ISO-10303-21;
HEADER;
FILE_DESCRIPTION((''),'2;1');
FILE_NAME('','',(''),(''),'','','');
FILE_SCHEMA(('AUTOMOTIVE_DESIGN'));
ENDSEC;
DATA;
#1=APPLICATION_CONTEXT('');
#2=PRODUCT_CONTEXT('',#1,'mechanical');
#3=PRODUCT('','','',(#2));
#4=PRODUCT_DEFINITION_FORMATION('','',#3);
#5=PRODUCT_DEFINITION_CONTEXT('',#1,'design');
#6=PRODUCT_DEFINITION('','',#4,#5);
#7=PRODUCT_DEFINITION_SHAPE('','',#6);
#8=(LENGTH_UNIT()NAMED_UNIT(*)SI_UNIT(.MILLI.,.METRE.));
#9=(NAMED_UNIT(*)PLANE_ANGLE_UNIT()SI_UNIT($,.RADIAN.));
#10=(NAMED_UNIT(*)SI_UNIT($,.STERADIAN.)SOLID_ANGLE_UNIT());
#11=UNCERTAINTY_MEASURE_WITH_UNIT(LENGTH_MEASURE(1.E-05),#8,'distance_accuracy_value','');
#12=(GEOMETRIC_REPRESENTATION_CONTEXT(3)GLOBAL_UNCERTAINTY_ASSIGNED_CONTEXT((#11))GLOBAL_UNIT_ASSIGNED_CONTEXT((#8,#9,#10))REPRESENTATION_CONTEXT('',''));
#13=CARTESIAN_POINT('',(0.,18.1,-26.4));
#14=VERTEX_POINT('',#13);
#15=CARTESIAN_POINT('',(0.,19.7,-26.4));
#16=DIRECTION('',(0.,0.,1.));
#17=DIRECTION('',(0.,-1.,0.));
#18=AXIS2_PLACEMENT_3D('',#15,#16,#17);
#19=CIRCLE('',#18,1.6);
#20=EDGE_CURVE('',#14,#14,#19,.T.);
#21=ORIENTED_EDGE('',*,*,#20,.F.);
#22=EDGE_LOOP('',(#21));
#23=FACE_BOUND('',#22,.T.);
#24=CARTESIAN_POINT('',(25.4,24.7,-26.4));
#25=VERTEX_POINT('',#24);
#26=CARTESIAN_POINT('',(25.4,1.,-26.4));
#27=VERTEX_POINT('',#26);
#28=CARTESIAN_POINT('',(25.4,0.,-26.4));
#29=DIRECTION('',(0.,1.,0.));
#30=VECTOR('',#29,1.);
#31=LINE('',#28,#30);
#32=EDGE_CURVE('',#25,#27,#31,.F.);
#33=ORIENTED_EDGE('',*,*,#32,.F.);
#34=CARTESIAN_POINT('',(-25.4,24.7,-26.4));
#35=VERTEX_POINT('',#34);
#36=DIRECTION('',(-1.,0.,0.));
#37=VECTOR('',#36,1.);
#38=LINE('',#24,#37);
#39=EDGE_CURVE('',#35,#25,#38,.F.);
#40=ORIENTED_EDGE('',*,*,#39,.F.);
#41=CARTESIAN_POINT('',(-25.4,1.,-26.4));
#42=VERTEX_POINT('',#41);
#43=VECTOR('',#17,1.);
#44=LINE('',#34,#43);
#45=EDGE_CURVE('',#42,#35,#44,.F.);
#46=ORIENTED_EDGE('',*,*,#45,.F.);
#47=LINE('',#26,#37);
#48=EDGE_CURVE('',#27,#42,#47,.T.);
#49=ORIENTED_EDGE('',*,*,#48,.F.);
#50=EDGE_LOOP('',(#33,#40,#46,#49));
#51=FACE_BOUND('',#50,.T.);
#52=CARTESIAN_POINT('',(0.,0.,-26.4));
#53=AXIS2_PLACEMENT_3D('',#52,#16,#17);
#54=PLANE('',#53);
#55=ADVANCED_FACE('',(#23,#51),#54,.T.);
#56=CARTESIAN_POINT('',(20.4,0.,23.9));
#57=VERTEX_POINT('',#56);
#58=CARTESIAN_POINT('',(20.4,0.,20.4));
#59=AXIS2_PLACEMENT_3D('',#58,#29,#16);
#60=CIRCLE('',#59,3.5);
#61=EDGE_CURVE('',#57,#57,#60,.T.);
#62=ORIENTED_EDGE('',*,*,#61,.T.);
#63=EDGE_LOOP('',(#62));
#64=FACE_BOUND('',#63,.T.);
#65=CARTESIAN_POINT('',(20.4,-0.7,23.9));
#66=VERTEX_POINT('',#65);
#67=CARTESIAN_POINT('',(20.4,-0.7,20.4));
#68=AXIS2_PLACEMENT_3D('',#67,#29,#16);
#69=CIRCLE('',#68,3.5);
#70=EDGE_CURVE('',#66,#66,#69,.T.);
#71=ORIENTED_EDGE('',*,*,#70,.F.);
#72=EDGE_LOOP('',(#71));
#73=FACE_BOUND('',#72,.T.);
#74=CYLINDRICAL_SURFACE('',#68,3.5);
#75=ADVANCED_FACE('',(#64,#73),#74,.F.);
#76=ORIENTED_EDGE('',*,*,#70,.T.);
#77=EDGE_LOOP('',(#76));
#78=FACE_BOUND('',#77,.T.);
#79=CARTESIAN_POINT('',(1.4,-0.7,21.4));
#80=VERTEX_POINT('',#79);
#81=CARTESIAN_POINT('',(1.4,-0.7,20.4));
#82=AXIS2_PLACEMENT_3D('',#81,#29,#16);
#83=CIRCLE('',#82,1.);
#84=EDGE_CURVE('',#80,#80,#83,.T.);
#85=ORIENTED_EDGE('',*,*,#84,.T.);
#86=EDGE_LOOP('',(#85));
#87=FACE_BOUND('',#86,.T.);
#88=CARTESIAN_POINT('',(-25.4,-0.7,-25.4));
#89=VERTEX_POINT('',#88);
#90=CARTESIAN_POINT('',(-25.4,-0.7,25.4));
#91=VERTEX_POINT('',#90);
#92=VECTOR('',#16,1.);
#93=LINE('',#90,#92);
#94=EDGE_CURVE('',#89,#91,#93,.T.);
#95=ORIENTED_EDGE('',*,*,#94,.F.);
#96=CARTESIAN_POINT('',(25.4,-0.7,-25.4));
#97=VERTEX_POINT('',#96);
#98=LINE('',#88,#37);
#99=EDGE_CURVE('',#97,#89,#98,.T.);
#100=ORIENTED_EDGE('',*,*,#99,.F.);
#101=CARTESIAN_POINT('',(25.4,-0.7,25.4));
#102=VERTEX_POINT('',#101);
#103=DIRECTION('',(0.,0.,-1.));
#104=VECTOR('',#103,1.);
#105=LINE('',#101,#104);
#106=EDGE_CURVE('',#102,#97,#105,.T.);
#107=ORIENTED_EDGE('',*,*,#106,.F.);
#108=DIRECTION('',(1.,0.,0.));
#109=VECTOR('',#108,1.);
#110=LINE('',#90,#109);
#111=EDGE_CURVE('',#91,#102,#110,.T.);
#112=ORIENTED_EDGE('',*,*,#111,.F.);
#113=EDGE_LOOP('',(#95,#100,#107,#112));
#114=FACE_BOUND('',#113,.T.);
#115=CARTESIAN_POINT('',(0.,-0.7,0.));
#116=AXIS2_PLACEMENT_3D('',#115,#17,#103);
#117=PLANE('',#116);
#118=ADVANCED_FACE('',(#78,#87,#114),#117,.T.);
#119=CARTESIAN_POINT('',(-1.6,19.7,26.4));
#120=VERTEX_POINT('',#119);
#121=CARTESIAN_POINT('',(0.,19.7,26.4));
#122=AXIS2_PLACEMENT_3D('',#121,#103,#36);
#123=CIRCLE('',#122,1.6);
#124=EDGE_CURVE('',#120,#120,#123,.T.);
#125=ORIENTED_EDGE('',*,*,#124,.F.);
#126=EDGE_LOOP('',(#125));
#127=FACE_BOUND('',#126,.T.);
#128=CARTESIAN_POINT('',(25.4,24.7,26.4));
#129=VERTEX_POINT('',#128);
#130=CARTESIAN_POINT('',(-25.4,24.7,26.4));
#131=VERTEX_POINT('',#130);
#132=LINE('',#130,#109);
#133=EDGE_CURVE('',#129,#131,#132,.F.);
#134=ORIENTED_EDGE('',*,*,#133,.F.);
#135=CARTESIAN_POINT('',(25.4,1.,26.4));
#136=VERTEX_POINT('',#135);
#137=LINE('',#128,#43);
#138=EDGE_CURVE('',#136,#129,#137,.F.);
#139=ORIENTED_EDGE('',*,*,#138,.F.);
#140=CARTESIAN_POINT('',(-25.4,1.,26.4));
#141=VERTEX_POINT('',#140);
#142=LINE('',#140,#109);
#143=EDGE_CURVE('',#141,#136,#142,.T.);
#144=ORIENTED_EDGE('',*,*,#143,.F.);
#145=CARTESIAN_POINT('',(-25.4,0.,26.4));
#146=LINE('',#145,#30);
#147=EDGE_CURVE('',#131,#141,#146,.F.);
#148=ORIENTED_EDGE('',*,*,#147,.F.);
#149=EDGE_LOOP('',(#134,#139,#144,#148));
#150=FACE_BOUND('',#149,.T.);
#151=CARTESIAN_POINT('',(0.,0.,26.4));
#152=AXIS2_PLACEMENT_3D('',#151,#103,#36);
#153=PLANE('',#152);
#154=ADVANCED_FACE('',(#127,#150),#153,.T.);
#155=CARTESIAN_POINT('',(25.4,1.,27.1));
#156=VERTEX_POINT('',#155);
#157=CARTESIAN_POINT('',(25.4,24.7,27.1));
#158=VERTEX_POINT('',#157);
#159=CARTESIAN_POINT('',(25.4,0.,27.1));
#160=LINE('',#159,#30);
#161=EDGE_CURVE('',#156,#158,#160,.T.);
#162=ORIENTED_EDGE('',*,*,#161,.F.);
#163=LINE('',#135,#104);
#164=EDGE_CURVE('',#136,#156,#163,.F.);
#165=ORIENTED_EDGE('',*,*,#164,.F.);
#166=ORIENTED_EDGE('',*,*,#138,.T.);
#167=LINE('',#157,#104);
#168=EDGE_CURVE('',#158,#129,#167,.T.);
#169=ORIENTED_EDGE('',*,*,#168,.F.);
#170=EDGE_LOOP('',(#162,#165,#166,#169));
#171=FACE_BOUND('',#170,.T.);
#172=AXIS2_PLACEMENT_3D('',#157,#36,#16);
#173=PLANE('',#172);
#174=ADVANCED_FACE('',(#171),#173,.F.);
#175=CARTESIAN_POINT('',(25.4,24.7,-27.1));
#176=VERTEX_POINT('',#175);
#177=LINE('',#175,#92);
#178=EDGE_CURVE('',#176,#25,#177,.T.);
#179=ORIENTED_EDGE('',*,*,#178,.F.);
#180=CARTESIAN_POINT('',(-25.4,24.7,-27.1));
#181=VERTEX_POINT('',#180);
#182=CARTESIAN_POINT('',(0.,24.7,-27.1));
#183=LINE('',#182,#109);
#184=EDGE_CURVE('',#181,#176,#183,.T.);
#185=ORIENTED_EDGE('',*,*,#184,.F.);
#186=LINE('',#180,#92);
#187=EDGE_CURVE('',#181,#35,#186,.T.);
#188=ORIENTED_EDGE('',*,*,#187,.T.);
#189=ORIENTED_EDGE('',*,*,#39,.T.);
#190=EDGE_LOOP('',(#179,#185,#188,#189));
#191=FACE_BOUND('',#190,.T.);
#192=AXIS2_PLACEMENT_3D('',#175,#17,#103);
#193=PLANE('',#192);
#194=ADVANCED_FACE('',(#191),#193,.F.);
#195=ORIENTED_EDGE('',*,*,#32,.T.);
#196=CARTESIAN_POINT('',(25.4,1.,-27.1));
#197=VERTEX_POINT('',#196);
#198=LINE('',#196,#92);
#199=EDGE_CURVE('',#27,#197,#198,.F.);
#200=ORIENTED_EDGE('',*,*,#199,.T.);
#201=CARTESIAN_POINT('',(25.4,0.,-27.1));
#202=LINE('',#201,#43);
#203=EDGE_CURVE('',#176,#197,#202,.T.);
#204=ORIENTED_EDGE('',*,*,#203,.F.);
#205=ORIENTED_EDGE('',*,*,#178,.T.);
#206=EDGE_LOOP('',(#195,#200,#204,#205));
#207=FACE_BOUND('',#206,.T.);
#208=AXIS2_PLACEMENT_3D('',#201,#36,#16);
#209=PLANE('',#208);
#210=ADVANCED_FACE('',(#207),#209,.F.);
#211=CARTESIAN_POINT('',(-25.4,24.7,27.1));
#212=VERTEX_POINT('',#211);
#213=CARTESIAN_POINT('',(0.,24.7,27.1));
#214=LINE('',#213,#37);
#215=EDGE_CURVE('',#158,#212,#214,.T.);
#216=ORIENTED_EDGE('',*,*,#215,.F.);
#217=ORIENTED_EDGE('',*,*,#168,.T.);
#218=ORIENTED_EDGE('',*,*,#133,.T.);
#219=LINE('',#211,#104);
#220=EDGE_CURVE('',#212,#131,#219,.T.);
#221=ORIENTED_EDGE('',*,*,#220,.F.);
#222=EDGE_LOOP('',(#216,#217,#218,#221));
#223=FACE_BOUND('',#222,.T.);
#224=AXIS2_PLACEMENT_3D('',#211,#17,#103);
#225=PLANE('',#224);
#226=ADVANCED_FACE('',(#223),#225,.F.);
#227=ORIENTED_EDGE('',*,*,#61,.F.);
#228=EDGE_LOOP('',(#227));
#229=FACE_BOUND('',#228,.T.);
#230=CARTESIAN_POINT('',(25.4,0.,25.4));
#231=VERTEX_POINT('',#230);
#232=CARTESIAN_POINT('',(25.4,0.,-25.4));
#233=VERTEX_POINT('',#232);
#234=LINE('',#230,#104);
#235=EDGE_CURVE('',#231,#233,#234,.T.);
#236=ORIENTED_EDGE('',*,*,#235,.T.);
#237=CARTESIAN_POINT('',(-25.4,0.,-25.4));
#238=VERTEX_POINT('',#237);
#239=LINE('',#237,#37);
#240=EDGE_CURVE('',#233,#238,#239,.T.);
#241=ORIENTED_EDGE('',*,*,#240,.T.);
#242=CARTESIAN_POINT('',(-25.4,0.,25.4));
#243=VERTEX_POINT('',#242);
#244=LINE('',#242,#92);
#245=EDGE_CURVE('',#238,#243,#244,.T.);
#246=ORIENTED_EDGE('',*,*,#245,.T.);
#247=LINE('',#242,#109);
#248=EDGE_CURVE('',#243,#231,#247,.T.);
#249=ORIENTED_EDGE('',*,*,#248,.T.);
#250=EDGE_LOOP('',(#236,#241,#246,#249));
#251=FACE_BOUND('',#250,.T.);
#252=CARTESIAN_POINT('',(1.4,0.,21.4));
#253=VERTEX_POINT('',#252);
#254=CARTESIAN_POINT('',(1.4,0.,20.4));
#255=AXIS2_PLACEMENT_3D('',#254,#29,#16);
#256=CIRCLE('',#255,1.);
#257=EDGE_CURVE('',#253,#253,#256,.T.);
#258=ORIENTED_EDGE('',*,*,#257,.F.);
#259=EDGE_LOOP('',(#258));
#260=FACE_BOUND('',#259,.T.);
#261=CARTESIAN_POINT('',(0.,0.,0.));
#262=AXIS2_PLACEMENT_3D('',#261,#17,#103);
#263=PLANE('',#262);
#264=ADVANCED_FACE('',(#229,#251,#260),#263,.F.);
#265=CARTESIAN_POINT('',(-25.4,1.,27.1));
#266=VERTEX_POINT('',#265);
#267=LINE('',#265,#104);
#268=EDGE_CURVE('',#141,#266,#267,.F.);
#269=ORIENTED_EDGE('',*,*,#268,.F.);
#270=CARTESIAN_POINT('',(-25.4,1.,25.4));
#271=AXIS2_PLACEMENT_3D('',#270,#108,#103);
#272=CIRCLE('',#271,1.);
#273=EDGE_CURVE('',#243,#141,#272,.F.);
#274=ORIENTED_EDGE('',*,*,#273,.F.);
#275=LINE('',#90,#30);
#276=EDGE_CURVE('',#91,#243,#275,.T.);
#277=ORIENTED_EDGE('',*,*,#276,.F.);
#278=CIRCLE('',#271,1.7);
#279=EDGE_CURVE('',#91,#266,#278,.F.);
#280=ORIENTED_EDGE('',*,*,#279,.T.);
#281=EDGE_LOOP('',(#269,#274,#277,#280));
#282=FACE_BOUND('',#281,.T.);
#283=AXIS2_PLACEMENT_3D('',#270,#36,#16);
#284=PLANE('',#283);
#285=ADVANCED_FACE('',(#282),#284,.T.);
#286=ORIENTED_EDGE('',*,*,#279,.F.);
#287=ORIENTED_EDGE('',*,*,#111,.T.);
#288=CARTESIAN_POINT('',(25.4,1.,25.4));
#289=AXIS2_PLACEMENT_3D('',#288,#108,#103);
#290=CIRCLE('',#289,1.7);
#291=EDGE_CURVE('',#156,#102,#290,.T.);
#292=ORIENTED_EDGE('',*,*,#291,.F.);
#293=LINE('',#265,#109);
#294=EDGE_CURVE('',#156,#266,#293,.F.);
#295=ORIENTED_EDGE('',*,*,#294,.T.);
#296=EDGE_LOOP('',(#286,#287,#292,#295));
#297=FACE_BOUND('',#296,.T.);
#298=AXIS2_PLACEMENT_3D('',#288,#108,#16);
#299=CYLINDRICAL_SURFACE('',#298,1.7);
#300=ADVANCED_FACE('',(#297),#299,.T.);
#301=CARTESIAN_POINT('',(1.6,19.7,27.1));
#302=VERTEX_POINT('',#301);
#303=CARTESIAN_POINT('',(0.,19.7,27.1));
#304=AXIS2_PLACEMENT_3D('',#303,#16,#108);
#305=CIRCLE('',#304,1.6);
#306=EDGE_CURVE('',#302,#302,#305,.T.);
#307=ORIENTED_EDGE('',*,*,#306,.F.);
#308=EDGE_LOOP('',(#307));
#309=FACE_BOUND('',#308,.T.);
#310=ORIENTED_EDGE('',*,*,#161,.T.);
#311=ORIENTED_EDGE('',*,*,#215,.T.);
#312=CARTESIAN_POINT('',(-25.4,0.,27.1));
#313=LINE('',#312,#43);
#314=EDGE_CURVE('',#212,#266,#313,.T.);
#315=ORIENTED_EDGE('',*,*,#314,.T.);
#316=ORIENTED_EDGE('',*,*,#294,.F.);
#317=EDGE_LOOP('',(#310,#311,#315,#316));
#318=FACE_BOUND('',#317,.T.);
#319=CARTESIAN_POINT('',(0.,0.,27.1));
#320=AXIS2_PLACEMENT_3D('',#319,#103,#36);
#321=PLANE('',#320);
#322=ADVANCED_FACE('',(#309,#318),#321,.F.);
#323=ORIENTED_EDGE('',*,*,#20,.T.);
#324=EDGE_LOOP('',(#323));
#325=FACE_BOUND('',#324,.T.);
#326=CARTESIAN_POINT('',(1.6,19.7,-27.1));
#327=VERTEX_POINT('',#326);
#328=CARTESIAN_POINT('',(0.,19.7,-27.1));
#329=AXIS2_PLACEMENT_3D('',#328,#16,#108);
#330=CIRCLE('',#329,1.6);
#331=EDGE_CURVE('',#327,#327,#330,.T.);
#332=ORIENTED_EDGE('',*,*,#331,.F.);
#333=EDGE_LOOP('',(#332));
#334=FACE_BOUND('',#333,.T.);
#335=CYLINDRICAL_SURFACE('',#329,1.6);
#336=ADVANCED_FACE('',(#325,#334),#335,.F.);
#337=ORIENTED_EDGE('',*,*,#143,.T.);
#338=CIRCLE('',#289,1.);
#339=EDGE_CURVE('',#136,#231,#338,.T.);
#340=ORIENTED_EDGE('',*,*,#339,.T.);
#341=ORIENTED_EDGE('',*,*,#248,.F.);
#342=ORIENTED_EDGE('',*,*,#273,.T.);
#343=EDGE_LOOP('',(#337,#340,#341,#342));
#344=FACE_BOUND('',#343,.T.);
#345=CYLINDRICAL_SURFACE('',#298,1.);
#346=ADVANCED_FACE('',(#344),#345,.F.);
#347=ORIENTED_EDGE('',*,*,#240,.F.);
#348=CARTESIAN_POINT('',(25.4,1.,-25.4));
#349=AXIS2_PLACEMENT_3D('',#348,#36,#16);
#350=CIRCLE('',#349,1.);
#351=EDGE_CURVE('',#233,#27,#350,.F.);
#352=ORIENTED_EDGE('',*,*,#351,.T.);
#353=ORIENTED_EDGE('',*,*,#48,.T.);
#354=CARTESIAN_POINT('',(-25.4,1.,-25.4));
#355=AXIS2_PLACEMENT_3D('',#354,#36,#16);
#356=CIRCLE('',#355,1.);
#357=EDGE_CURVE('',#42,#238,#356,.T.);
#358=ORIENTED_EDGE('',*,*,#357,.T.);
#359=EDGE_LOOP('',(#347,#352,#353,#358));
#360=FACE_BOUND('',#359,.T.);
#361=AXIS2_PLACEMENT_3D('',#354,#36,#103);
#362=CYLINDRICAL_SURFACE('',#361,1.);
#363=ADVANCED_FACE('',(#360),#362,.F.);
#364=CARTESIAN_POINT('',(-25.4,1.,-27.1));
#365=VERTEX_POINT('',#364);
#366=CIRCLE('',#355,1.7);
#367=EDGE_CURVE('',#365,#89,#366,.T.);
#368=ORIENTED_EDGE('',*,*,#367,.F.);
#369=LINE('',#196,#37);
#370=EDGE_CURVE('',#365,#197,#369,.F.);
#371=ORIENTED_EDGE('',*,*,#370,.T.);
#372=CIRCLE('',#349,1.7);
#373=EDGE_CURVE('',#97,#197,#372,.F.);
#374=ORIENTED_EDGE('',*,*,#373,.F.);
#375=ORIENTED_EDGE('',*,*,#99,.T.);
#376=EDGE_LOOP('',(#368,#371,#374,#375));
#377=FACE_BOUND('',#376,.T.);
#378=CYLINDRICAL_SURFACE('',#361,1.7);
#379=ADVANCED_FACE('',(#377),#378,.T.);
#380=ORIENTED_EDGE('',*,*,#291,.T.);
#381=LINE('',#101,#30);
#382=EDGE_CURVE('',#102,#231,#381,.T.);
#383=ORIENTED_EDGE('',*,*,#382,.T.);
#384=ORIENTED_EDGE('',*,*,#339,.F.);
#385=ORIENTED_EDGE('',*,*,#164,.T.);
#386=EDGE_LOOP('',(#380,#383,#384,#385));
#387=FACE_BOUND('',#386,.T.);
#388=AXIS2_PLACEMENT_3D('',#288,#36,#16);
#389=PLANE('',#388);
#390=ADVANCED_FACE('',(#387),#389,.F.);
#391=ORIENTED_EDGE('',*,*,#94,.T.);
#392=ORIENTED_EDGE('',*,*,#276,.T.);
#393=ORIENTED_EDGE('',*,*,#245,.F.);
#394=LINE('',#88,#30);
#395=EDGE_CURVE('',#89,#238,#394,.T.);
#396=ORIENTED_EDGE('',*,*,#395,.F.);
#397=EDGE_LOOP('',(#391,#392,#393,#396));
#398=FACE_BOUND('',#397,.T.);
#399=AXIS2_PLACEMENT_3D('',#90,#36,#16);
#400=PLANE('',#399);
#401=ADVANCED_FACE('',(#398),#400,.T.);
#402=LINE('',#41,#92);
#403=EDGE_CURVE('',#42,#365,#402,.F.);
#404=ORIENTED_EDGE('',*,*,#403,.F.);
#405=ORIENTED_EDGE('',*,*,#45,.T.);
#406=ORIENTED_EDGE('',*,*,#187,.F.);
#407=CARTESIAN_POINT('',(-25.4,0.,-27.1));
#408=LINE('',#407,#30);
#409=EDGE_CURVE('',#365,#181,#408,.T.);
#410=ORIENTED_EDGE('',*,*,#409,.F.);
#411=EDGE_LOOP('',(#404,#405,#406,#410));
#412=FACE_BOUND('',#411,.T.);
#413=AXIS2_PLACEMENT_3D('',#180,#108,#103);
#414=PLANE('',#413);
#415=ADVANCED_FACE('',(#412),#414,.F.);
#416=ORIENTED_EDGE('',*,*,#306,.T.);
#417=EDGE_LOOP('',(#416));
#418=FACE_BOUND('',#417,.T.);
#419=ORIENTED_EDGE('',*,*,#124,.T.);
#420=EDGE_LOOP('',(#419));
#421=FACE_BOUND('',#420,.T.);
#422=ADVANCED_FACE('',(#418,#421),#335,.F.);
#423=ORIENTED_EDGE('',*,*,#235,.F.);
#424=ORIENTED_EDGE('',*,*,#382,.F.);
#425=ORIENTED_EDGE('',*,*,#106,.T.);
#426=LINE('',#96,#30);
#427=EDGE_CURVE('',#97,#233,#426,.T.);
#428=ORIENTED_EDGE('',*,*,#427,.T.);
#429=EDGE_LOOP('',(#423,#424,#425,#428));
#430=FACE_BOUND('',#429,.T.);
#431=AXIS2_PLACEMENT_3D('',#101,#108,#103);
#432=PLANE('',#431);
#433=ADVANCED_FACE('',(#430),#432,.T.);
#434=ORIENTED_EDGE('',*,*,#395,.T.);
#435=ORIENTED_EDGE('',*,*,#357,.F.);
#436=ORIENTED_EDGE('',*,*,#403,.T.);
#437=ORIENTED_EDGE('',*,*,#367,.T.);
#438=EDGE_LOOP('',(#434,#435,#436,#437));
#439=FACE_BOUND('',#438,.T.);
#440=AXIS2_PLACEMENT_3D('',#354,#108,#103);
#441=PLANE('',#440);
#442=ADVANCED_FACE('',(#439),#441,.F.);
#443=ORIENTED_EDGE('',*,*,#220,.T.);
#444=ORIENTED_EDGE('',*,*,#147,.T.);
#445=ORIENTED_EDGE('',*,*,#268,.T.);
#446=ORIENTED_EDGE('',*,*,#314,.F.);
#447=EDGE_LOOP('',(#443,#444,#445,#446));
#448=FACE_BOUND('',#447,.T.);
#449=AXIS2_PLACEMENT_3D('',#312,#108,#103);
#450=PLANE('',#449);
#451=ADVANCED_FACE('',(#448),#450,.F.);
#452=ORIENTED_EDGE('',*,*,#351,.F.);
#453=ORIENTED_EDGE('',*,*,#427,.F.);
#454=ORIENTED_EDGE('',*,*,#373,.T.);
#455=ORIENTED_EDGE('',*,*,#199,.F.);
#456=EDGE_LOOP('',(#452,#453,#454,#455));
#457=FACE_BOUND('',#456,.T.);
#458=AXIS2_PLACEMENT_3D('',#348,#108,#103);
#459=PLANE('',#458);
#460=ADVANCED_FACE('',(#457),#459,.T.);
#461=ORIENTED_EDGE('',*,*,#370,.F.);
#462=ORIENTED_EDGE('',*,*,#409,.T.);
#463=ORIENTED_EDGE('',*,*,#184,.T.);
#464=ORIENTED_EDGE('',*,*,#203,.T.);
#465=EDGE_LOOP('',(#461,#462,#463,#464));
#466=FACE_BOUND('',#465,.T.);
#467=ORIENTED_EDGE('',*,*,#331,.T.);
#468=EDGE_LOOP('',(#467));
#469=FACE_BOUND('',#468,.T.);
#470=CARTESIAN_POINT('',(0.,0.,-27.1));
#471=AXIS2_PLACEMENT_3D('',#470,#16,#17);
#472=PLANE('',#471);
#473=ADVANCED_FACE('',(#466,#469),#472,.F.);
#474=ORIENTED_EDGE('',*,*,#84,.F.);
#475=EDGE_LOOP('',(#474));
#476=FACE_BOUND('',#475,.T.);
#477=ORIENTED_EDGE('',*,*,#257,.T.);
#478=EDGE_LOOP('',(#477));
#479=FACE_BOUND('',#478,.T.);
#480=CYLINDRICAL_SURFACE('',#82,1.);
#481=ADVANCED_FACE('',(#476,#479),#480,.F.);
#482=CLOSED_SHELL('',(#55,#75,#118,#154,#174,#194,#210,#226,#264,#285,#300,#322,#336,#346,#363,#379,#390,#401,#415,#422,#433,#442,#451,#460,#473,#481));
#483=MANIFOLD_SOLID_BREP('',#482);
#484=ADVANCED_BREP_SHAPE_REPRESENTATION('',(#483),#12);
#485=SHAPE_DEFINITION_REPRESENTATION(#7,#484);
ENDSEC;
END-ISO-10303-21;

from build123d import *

# Parameters (mm, degrees)
SKETCH1_W               = 50.8
SKETCH1_H               = 50.8
BASE_FLANGE1_DEPTH      = 0.7
EDGE_FLANGE1_DEPTH      = 50.8
EDGE_FLANGE1_BEND_DEPTH = 50.8
SKETCH12_R              = 3.5
CUT_EXTRUDE1_DEPTH      = 45.605605029
SKETCH13_R              = 1
CUT_EXTRUDE2_DEPTH      = 45.605605029
SKETCH14_R              = 1.6
CUT_EXTRUDE3_DEPTH      = 65.752528908


# Sheet-metal steps are written as plain solids
with BuildPart() as part:
    # Sketch1 → Base-Flange1 (new body)
    with BuildSketch(Plane(origin=(0, 0, 0), x_dir=(1, 0, 0), z_dir=(0, 1, 0))):
        Rectangle(SKETCH1_W, SKETCH1_H)
    extrude(amount=-BASE_FLANGE1_DEPTH)

    # Edge-Flange1 section (across the edge) → Edge-Flange1 (add)
    with BuildSketch(Plane(origin=(25.4, 0, -26.4), x_dir=(0, 0, 1), z_dir=(-1, 0, 0))):
        with BuildLine():
            Line((-0.7, 1), (-0.7, 24.7))
            Line((-0.7, 24.7), (0, 24.7))
            Line((0, 24.7), (0, 1))
            ThreePointArc((0, 1), (0.292893219, 0.292893219), (1, 0))
            Line((1, 0), (1, -0.7))
            ThreePointArc((1, -0.7), (-0.202081528, -0.202081528), (-0.7, 1))
        make_face()
    extrude(amount=EDGE_FLANGE1_DEPTH)

    # Edge-Flange1 section 2 (across the edge) → Edge-Flange1 bend (add)
    with BuildSketch(Plane(origin=(-25.4, 0, 26.4), x_dir=(0, 0, -1), z_dir=(1, 0, 0))):
        with BuildLine():
            Line((-0.7, 1), (-0.7, 24.7))
            Line((-0.7, 24.7), (0, 24.7))
            Line((0, 24.7), (0, 1))
            ThreePointArc((0, 1), (0.292893219, 0.292893219), (1, 0))
            Line((1, 0), (1, -0.7))
            ThreePointArc((1, -0.7), (-0.202081528, -0.202081528), (-0.7, 1))
        make_face()
    extrude(amount=EDGE_FLANGE1_BEND_DEPTH)

    # Sketch12 → Cut-Extrude1 (cut, through all)
    with BuildSketch(Plane(origin=(0, 0, 0), x_dir=(1, 0, 0), z_dir=(0, 1, 0))):
        with Locations(Location((20.4, -20.4, 0), (0, 0, 270))):
            Circle(SKETCH12_R)
    extrude(amount=-CUT_EXTRUDE1_DEPTH, mode=Mode.SUBTRACT)

    # Sketch13 → Cut-Extrude2 (cut, through all)
    with BuildSketch(Plane(origin=(0, 0, 0), x_dir=(1, 0, 0), z_dir=(0, 1, 0))):
        with Locations(Location((1.4, -20.4, 0), (0, 0, 270))):
            Circle(SKETCH13_R)
    extrude(amount=-CUT_EXTRUDE2_DEPTH, mode=Mode.SUBTRACT)

    # Sketch14 → Cut-Extrude3 (cut, through all)
    with BuildSketch(Plane.XY.offset(27.1)):
        with Locations((0, 19.7)):
            Circle(SKETCH14_R)
    extrude(amount=-CUT_EXTRUDE3_DEPTH, mode=Mode.SUBTRACT)


solid = part.part
